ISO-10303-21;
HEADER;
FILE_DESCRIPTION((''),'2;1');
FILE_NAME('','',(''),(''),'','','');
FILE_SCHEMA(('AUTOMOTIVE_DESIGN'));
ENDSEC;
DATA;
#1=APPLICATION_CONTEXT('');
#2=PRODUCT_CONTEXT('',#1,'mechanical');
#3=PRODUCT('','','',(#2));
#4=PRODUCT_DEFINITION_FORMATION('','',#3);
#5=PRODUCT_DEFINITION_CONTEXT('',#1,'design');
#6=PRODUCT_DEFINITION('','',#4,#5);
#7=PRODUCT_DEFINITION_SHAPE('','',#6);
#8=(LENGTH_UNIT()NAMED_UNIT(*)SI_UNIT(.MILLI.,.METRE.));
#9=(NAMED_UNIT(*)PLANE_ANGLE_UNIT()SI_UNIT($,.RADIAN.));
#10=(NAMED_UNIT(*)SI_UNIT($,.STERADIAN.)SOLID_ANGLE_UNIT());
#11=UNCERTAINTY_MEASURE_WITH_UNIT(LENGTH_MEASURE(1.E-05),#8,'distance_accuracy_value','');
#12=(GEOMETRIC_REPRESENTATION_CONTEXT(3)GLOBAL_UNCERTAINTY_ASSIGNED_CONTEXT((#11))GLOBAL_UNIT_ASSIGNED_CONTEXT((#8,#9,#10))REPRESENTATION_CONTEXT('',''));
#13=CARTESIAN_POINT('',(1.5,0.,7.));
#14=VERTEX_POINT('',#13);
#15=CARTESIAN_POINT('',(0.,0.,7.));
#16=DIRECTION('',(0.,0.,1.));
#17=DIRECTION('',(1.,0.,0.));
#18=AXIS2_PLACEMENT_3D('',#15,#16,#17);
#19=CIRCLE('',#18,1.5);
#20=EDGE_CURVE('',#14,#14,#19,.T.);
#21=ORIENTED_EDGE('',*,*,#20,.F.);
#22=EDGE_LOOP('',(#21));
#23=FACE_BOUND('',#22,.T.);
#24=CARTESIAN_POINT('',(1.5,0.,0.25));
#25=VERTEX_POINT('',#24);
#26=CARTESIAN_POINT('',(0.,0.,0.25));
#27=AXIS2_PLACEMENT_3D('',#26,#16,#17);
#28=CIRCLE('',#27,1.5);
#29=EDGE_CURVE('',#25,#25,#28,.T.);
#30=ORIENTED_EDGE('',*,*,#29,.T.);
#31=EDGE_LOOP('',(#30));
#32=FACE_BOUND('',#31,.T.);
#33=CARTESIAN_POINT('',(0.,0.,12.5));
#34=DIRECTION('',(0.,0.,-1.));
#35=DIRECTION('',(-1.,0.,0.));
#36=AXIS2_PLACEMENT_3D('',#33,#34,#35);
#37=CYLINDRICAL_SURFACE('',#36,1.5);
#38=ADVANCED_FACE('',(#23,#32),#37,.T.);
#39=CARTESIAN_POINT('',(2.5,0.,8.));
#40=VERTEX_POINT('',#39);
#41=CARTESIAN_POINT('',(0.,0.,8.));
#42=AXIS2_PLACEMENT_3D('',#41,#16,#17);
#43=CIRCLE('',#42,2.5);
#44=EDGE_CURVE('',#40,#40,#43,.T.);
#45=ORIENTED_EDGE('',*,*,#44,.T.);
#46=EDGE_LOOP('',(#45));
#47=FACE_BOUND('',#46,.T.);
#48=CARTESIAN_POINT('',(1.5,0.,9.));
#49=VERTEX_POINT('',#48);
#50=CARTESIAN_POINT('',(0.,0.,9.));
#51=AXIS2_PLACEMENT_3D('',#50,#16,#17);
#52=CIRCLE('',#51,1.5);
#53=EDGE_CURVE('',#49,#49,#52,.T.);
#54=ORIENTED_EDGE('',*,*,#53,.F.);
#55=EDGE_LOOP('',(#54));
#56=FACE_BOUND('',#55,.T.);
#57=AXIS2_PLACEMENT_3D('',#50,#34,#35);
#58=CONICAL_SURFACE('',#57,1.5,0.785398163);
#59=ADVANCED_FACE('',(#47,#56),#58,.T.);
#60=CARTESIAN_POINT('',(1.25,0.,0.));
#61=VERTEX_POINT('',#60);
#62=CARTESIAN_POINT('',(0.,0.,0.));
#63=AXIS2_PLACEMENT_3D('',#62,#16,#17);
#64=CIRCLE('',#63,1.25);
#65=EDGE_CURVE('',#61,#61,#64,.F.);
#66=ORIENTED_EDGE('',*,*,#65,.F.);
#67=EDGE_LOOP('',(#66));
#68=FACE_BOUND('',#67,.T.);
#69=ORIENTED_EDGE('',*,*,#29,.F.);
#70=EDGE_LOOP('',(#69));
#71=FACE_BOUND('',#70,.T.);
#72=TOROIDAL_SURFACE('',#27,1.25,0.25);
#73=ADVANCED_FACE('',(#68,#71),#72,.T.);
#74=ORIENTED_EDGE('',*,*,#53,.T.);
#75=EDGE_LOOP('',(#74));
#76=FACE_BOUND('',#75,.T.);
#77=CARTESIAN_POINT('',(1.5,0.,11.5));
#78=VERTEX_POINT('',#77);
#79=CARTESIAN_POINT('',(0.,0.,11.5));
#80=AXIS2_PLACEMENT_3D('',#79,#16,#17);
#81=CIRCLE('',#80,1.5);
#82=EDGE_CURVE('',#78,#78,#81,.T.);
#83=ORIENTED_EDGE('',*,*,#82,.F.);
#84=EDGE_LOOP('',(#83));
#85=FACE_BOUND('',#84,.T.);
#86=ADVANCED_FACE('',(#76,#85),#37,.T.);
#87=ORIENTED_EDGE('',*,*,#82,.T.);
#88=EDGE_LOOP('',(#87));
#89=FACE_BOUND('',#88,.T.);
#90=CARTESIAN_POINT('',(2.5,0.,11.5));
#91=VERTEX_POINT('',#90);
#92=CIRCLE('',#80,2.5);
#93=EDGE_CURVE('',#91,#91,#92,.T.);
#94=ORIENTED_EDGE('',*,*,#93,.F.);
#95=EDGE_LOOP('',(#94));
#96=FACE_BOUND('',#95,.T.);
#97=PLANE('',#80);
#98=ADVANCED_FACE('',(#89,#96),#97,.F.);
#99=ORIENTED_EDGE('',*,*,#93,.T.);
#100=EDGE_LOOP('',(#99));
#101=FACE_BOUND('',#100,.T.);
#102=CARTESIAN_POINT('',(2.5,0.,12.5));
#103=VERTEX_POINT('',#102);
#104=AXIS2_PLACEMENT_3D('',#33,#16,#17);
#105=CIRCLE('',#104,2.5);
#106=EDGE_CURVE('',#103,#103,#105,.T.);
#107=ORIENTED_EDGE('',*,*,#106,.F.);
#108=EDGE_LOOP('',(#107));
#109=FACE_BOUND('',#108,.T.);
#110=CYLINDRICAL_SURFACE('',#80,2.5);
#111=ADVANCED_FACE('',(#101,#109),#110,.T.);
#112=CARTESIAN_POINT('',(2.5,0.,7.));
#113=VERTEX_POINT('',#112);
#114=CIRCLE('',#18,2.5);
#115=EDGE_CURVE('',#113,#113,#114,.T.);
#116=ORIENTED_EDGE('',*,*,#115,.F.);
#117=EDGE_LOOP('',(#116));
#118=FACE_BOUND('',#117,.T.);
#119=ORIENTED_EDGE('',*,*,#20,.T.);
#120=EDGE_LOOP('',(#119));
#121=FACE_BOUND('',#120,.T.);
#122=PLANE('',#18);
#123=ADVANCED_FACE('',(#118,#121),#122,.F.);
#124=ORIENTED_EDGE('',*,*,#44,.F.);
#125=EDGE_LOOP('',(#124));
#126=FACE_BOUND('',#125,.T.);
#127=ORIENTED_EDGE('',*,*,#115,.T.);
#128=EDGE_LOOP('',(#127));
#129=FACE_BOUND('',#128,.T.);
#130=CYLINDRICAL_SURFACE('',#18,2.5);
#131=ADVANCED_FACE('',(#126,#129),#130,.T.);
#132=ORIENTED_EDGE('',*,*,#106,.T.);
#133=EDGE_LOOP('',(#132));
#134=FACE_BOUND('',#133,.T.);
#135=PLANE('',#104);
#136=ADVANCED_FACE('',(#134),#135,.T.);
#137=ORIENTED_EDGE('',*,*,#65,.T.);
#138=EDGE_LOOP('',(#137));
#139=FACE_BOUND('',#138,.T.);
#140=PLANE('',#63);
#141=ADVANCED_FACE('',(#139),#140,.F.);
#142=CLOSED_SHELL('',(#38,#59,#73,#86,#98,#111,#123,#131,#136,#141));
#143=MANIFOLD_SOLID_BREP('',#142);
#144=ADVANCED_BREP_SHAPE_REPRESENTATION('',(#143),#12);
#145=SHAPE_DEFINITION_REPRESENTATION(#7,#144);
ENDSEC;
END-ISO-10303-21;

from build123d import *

# Parameters (mm, degrees)
SKETCH1_R           = 1.5
BOSS_EXTRUDE1_DEPTH = 12.5
SKETCH2_R           = 2.5
BOSS_EXTRUDE2_DEPTH = 1
FILLET1_R           = 0.25
BOSS_EXTRUDE4_START = -4.5
SKETCH4_R           = 2.5
BOSS_EXTRUDE4_DEPTH = 1
CHAMFER2_SIZE       = 1


with BuildPart() as part:
    # Sketch1 → Boss-Extrude1 (new body)
    with BuildSketch(Plane.XY):
        Circle(SKETCH1_R)
    extrude(amount=BOSS_EXTRUDE1_DEPTH)

    # Sketch2 → Boss-Extrude2 (add)
    with BuildSketch(Plane.XY.offset(12.5)):
        Circle(SKETCH2_R)
    extrude(amount=-BOSS_EXTRUDE2_DEPTH)

    # Fillet1
    fillet1_edges = [part.edges().sort_by_distance(p)[0] for p in [
        (-1.5, 0, 0),
    ]]
    fillet(fillet1_edges, radius=FILLET1_R)

    # Sketch4 → Boss-Extrude4 (add)
    with BuildSketch(Plane.XY.offset(12.5).offset(BOSS_EXTRUDE4_START)):
        Circle(SKETCH4_R)
    extrude(amount=-BOSS_EXTRUDE4_DEPTH)

    # Chamfer2
    chamfer2_edges = [part.edges().sort_by_distance(p)[0] for p in [
        (-1.5, 0, 8),
    ]]
    chamfer(chamfer2_edges, length=CHAMFER2_SIZE - 0.0001)  # a hair under: the kernel refuses the full size


solid = part.part
